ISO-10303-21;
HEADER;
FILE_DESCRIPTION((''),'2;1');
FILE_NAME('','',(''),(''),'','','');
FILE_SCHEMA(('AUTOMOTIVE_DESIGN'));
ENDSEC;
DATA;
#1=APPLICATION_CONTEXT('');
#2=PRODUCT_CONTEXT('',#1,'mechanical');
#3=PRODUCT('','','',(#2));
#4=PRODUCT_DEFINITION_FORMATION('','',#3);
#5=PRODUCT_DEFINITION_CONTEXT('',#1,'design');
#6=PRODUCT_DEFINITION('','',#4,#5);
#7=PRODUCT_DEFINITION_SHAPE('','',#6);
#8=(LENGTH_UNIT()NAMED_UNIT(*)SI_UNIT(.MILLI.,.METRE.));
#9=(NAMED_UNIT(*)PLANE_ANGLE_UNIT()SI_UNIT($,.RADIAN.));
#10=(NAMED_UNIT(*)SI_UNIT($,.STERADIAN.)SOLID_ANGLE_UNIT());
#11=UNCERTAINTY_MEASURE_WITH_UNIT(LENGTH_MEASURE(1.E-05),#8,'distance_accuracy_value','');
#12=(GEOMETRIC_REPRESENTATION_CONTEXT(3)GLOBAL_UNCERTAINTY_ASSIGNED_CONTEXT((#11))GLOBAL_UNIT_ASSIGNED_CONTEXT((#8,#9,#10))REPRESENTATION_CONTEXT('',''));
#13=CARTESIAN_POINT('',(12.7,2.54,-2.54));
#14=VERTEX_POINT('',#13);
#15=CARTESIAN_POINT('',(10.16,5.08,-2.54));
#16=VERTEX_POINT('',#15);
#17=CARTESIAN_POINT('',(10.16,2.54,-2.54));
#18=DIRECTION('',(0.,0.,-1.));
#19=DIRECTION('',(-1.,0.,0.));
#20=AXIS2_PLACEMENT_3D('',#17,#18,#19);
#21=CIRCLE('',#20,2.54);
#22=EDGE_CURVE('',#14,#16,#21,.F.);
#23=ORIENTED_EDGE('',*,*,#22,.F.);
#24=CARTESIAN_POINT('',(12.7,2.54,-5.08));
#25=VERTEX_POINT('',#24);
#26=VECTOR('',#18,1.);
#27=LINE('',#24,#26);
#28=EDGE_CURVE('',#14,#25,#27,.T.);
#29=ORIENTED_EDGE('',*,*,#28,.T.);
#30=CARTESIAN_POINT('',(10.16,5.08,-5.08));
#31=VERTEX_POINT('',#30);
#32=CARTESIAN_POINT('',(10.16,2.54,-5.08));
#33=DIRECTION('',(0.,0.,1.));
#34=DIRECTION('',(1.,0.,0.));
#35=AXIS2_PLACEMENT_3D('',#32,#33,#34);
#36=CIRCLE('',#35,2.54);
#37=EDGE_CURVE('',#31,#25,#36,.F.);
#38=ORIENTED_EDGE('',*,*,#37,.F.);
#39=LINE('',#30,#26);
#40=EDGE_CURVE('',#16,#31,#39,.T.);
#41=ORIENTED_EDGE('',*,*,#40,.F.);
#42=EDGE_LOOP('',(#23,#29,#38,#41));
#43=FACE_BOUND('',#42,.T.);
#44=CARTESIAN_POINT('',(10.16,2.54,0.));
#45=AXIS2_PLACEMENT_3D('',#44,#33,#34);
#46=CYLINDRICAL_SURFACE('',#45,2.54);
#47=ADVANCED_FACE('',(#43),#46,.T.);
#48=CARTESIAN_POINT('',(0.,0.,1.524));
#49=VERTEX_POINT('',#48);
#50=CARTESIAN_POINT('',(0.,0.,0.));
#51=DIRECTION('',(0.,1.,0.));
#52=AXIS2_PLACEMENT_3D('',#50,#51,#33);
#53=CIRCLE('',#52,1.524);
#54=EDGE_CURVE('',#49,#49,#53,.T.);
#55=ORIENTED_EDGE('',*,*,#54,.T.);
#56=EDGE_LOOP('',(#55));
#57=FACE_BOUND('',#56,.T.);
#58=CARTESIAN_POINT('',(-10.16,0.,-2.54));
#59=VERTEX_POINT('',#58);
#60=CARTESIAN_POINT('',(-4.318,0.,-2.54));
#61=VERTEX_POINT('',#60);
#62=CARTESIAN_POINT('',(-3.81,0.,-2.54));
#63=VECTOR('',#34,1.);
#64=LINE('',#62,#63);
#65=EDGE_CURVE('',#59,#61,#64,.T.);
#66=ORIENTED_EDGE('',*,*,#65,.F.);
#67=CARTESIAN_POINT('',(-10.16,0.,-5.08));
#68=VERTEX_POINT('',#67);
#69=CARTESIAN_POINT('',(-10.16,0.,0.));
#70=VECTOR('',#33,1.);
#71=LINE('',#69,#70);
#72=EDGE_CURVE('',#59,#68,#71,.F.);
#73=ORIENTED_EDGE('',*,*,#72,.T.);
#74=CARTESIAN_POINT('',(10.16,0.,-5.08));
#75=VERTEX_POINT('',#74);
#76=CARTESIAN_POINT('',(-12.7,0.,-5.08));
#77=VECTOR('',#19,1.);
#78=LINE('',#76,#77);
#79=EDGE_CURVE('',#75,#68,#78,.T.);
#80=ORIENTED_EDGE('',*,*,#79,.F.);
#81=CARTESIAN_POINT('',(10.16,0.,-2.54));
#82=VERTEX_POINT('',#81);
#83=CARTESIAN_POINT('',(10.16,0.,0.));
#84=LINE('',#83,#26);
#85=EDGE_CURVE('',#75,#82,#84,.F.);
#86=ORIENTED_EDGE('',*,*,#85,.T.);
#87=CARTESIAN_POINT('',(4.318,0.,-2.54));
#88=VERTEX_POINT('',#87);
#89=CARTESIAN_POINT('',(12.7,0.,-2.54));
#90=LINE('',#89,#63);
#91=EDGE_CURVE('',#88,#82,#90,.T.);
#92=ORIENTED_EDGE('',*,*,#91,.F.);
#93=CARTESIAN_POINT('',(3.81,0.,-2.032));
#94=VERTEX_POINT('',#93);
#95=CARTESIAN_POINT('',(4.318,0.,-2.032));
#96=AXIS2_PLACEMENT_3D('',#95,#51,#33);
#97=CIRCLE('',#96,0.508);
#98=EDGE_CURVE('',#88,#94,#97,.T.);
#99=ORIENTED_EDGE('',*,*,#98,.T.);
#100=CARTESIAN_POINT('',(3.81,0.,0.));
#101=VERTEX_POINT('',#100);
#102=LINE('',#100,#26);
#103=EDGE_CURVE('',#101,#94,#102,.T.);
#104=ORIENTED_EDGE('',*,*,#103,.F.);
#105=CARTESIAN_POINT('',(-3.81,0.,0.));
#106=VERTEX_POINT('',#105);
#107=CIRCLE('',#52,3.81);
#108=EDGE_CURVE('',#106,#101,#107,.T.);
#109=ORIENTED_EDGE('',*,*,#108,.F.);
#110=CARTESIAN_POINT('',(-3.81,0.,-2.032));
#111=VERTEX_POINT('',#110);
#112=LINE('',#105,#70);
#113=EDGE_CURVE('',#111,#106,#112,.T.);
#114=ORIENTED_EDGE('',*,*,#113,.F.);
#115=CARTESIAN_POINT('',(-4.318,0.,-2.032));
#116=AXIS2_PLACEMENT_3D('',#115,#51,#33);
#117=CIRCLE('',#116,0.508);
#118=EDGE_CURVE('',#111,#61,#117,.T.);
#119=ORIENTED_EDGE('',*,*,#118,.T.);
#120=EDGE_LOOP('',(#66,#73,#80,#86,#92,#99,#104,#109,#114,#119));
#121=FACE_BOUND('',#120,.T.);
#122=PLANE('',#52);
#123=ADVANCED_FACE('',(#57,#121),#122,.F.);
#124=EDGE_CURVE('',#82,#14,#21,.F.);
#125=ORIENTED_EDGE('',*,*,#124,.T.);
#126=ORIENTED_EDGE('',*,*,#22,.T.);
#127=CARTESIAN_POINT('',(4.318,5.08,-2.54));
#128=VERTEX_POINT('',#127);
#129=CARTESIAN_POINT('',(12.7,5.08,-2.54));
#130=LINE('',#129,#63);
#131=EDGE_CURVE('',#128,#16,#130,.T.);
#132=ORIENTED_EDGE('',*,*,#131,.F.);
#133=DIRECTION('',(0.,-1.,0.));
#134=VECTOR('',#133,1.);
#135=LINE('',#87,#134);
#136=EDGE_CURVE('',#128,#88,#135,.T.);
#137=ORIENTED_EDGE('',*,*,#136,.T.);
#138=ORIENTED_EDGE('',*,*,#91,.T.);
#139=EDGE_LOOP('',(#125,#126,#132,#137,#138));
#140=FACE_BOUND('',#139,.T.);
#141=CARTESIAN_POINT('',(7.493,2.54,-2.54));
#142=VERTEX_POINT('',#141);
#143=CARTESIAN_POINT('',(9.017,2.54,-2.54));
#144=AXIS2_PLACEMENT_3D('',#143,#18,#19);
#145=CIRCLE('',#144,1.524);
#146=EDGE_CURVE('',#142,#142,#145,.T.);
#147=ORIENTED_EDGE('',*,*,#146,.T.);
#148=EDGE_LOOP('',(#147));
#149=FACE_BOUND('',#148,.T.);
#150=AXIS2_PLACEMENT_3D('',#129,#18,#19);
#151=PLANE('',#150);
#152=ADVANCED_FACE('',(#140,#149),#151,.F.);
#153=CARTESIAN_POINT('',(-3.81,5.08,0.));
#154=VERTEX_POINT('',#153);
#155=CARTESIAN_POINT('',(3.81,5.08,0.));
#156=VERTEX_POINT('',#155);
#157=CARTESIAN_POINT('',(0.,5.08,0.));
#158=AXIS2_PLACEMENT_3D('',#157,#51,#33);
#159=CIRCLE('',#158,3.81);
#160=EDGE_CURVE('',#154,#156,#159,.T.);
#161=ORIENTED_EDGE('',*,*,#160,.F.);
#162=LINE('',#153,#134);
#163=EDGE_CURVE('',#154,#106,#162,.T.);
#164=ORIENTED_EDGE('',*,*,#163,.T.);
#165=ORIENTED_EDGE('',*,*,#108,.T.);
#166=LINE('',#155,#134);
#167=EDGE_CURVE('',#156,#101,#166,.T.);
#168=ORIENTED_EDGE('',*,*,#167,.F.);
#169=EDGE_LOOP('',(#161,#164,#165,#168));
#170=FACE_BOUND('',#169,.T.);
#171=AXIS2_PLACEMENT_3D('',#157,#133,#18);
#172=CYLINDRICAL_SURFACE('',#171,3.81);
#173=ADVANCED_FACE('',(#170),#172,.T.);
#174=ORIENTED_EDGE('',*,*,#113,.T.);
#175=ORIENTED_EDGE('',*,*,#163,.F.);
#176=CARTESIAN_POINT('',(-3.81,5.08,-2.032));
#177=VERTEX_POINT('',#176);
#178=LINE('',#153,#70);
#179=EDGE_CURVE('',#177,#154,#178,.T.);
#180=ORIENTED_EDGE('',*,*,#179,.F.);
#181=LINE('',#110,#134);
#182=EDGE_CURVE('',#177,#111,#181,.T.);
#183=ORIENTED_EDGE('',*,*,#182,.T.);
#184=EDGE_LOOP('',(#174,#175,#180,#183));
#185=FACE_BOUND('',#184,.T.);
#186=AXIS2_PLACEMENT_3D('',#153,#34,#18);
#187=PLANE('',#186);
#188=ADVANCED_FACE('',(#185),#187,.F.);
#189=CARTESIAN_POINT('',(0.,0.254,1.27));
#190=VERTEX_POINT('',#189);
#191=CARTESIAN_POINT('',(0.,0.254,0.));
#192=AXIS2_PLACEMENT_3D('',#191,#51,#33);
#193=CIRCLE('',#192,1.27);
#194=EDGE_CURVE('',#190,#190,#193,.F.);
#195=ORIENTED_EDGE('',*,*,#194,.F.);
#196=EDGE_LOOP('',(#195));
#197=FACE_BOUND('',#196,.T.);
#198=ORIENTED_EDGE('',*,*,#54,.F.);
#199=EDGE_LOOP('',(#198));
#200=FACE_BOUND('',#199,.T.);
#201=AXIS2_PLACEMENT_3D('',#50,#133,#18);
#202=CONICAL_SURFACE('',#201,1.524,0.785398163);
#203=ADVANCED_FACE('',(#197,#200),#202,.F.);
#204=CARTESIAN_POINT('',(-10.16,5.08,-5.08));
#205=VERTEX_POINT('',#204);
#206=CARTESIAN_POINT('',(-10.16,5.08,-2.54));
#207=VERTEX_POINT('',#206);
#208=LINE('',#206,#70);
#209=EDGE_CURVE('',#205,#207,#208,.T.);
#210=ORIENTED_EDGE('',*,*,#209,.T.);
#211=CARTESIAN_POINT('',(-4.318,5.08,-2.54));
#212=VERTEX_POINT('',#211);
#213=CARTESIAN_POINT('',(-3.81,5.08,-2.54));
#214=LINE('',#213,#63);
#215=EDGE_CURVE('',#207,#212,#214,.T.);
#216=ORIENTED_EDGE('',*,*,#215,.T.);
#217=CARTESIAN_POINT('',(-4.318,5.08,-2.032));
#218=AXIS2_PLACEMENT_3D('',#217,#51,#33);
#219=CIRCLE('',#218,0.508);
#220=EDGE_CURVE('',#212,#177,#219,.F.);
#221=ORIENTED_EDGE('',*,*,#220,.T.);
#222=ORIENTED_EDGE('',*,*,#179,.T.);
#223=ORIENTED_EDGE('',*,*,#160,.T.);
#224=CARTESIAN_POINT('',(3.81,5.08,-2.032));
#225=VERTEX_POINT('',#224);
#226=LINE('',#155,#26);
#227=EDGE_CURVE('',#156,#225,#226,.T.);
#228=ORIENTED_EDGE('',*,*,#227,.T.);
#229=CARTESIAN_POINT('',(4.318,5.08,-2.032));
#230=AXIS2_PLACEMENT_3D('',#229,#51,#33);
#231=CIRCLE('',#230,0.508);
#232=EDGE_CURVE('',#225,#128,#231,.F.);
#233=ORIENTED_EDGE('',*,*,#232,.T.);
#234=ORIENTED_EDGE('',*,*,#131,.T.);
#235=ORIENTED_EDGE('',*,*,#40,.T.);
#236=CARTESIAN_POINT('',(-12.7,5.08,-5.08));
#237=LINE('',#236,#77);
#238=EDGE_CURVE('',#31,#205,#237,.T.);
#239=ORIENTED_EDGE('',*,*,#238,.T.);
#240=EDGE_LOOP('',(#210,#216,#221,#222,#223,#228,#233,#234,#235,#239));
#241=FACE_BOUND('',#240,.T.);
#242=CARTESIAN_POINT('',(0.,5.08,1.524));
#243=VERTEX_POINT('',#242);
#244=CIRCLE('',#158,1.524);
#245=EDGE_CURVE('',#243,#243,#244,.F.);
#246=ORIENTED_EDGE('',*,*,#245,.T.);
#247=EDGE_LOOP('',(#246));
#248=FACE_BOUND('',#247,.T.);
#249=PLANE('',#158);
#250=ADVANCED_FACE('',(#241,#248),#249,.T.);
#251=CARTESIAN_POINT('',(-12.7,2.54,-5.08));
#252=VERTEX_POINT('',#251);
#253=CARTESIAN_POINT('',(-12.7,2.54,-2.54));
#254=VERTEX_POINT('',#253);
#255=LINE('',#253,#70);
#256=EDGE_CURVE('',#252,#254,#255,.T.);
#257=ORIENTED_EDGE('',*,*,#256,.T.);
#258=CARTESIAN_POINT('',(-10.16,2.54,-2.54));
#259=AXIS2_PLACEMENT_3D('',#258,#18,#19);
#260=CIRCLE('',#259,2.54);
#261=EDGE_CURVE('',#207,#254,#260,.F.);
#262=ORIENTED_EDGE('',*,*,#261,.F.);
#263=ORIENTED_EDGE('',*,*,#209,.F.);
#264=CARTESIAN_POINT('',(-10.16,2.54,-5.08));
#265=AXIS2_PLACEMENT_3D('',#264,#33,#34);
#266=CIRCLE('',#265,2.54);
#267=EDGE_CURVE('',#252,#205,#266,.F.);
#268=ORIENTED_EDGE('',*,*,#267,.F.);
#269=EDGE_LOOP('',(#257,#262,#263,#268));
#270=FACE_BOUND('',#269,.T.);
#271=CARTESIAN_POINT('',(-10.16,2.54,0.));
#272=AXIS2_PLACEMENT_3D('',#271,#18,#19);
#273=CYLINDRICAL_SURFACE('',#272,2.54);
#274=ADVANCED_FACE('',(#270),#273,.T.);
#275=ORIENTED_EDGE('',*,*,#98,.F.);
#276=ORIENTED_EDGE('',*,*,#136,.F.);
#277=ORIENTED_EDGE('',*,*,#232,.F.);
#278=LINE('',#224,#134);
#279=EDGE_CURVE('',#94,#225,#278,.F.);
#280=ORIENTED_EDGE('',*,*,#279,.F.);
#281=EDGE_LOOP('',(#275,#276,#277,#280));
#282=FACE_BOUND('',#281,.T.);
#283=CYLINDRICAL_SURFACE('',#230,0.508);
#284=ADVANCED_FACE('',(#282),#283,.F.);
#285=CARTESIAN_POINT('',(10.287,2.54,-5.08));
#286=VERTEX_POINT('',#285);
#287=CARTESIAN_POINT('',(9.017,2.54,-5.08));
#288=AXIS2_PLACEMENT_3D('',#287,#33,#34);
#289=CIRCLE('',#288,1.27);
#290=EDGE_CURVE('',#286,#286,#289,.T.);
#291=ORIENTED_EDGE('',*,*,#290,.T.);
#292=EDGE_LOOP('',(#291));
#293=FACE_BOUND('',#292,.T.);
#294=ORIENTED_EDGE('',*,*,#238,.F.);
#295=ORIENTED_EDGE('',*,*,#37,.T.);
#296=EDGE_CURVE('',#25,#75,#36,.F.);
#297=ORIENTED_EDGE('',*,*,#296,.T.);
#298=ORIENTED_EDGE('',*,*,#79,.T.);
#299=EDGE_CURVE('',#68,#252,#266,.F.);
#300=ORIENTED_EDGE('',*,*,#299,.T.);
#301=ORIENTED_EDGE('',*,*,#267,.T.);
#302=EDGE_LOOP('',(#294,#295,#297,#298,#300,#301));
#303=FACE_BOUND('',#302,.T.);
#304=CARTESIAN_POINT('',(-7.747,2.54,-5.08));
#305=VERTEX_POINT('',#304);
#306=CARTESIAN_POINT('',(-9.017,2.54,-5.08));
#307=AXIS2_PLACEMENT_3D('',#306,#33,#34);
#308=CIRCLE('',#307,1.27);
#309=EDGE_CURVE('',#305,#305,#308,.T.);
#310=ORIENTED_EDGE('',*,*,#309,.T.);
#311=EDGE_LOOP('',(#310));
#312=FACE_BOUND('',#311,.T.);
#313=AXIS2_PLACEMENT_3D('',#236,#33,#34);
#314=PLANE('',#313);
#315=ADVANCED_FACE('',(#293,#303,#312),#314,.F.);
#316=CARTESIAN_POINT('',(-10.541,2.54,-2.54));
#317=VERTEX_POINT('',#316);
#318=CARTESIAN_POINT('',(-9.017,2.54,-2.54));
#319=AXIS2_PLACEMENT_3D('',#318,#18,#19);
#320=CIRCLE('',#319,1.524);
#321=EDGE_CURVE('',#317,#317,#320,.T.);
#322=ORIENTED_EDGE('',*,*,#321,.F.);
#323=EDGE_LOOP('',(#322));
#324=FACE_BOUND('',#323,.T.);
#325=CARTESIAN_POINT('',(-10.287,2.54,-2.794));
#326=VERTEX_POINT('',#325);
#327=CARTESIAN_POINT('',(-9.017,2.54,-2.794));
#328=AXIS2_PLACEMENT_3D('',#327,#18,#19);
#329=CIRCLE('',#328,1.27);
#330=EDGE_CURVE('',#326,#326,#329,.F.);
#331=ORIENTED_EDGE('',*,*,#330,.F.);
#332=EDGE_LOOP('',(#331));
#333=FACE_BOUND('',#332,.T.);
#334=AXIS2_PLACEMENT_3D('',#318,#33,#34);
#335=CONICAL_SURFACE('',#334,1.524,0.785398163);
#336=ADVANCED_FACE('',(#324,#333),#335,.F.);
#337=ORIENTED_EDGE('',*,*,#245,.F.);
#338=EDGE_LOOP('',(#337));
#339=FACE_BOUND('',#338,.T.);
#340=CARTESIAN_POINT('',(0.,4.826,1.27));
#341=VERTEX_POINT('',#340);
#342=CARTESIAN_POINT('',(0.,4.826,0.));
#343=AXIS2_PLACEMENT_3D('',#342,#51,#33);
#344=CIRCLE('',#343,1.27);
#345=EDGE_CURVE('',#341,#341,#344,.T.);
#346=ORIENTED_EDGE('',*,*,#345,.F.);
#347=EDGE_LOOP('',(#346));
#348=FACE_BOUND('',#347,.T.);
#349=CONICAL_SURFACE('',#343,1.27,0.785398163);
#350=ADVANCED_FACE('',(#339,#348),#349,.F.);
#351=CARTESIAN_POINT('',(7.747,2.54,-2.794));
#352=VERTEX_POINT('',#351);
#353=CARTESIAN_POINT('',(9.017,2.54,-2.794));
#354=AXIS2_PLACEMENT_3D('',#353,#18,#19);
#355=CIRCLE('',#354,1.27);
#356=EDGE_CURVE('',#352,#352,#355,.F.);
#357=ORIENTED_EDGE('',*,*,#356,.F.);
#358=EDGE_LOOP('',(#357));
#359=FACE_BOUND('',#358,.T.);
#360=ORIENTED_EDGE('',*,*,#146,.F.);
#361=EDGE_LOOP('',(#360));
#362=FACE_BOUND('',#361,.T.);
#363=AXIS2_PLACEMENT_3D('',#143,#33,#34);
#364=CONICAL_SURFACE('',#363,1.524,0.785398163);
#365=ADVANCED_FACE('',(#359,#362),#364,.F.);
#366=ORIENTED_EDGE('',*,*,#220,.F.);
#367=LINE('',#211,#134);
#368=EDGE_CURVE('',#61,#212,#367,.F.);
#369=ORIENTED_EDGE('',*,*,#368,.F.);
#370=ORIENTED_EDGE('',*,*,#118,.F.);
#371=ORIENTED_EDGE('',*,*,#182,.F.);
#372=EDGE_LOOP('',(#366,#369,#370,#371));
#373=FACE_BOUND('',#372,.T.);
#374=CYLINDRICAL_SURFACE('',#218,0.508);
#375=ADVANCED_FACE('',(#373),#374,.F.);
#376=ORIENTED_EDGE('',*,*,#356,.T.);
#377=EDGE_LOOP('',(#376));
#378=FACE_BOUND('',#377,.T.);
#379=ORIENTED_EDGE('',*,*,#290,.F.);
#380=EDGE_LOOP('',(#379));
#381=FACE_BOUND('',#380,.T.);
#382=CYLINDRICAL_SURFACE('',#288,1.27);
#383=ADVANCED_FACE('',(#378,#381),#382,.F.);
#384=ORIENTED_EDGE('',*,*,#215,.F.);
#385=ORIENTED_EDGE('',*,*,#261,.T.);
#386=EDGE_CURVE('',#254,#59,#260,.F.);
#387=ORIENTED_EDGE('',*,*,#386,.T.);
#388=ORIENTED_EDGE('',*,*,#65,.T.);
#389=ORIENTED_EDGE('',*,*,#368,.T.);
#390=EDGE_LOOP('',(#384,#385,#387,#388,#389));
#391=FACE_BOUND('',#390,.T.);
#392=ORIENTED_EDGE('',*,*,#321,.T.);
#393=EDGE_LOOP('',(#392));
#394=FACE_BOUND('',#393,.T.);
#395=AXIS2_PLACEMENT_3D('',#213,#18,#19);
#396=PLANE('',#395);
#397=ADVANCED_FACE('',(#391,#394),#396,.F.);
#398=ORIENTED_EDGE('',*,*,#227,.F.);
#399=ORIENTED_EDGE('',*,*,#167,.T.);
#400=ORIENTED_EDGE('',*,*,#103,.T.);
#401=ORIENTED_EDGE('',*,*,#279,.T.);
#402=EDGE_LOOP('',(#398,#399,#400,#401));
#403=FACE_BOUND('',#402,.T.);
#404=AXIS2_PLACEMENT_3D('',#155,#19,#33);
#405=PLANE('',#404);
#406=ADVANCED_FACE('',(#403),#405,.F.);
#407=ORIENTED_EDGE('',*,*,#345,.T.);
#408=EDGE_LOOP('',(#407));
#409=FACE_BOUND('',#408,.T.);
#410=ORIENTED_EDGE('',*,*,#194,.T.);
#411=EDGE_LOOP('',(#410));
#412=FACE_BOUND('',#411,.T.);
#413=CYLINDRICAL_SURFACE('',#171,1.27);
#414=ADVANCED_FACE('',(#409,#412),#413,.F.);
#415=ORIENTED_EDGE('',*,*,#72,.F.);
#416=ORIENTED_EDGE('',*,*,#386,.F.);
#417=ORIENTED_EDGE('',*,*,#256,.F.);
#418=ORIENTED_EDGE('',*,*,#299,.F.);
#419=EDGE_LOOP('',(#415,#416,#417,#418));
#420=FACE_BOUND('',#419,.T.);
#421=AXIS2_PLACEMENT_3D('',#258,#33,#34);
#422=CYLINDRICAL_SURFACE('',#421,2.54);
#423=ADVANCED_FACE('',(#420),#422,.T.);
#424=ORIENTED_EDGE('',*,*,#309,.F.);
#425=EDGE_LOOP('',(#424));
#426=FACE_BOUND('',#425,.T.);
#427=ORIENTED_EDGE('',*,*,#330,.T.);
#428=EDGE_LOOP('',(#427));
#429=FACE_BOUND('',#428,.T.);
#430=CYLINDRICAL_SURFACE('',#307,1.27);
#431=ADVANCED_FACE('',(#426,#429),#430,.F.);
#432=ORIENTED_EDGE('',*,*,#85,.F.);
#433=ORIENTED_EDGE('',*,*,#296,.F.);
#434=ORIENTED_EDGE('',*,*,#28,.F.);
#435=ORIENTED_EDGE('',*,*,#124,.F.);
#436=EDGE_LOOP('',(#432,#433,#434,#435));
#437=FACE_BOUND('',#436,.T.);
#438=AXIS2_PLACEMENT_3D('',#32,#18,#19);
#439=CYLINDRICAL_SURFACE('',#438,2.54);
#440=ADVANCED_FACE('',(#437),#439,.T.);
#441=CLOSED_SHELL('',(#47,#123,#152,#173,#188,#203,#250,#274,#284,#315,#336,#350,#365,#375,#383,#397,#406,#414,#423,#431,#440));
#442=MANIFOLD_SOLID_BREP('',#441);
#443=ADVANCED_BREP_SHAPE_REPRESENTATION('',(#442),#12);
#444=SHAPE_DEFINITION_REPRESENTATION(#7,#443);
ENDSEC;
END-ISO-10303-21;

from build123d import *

# Parameters (mm, degrees)
SKETCH1_R               = 1.27
BOSS_EXTRUDE1_DEPTH     = 5.08
FILLET1_R               = 2.54
CUT_EXTRUDE1_DEPTH      = 16.080414451
CUT_EXTRUDE1_DEPTH_BACK = 16.080414451
SKETCH2_R               = 1.27
CHAMFER1_SIZE           = 0.254
FILLET2_R               = 0.508


with BuildPart() as part:
    # Sketch1 → Boss-Extrude1 (new body)
    with BuildSketch(Plane(origin=(0, 0, 0), x_dir=(1, 0, 0), z_dir=(0, 1, 0))):
        with BuildLine():
            Line((-12.7, 5.08), (12.7, 5.08))
            Line((12.7, 5.08), (12.7, 2.54))
            Line((12.7, 2.54), (3.81, 2.54))
            Line((3.81, 2.54), (3.81, 0))
            ThreePointArc((3.81, 0), (0, -3.81), (-3.81, 0))
            Line((-3.81, 0), (-3.81, 2.54))
            Line((-3.81, 2.54), (-12.7, 2.54))
            Line((-12.7, 2.54), (-12.7, 5.08))
        make_face()
        with Locations(Location((0, 0, 0), (0, 0, 270))):
            Circle(SKETCH1_R, mode=Mode.SUBTRACT)
    extrude(amount=BOSS_EXTRUDE1_DEPTH)

    # Fillet1
    fillet1_edges = [part.edges().sort_by_distance(p)[0] for p in [
        (-12.7, 5.08, -3.81),
        (-12.7, 0, -3.81),
        (12.7, 5.08, -3.81),
        (12.7, 0, -3.81),
    ]]
    fillet(fillet1_edges, radius=FILLET1_R - 0.0001)  # a hair under: the kernel refuses the full size

    # Sketch2 → Cut-Extrude1 (cut, two sides: drawn at the far end of the back side and taken through both)
    with BuildSketch(Plane.XY.offset(-2.54).offset(-CUT_EXTRUDE1_DEPTH_BACK)):
        with Locations((-9.017, 2.54)):
            Circle(SKETCH2_R)
        with Locations((9.017, 2.54)):
            Circle(SKETCH2_R)
    extrude(amount=CUT_EXTRUDE1_DEPTH + CUT_EXTRUDE1_DEPTH_BACK, mode=Mode.SUBTRACT)

    # Chamfer1
    chamfer1_edges = [part.edges().sort_by_distance(p)[0] for p in [
        (0, 0, -1.27),
        (0, 5.08, -1.27),
        (-10.287, 2.54, -2.54),
        (7.747, 2.54, -2.54),
    ]]
    chamfer(chamfer1_edges, length=CHAMFER1_SIZE)

    # Fillet2
    fillet2_edges = [part.edges().sort_by_distance(p)[0] for p in [
        (3.81, 2.54, -2.54),
        (-3.81, 2.54, -2.54),
    ]]
    fillet(fillet2_edges, radius=FILLET2_R)


solid = part.part
